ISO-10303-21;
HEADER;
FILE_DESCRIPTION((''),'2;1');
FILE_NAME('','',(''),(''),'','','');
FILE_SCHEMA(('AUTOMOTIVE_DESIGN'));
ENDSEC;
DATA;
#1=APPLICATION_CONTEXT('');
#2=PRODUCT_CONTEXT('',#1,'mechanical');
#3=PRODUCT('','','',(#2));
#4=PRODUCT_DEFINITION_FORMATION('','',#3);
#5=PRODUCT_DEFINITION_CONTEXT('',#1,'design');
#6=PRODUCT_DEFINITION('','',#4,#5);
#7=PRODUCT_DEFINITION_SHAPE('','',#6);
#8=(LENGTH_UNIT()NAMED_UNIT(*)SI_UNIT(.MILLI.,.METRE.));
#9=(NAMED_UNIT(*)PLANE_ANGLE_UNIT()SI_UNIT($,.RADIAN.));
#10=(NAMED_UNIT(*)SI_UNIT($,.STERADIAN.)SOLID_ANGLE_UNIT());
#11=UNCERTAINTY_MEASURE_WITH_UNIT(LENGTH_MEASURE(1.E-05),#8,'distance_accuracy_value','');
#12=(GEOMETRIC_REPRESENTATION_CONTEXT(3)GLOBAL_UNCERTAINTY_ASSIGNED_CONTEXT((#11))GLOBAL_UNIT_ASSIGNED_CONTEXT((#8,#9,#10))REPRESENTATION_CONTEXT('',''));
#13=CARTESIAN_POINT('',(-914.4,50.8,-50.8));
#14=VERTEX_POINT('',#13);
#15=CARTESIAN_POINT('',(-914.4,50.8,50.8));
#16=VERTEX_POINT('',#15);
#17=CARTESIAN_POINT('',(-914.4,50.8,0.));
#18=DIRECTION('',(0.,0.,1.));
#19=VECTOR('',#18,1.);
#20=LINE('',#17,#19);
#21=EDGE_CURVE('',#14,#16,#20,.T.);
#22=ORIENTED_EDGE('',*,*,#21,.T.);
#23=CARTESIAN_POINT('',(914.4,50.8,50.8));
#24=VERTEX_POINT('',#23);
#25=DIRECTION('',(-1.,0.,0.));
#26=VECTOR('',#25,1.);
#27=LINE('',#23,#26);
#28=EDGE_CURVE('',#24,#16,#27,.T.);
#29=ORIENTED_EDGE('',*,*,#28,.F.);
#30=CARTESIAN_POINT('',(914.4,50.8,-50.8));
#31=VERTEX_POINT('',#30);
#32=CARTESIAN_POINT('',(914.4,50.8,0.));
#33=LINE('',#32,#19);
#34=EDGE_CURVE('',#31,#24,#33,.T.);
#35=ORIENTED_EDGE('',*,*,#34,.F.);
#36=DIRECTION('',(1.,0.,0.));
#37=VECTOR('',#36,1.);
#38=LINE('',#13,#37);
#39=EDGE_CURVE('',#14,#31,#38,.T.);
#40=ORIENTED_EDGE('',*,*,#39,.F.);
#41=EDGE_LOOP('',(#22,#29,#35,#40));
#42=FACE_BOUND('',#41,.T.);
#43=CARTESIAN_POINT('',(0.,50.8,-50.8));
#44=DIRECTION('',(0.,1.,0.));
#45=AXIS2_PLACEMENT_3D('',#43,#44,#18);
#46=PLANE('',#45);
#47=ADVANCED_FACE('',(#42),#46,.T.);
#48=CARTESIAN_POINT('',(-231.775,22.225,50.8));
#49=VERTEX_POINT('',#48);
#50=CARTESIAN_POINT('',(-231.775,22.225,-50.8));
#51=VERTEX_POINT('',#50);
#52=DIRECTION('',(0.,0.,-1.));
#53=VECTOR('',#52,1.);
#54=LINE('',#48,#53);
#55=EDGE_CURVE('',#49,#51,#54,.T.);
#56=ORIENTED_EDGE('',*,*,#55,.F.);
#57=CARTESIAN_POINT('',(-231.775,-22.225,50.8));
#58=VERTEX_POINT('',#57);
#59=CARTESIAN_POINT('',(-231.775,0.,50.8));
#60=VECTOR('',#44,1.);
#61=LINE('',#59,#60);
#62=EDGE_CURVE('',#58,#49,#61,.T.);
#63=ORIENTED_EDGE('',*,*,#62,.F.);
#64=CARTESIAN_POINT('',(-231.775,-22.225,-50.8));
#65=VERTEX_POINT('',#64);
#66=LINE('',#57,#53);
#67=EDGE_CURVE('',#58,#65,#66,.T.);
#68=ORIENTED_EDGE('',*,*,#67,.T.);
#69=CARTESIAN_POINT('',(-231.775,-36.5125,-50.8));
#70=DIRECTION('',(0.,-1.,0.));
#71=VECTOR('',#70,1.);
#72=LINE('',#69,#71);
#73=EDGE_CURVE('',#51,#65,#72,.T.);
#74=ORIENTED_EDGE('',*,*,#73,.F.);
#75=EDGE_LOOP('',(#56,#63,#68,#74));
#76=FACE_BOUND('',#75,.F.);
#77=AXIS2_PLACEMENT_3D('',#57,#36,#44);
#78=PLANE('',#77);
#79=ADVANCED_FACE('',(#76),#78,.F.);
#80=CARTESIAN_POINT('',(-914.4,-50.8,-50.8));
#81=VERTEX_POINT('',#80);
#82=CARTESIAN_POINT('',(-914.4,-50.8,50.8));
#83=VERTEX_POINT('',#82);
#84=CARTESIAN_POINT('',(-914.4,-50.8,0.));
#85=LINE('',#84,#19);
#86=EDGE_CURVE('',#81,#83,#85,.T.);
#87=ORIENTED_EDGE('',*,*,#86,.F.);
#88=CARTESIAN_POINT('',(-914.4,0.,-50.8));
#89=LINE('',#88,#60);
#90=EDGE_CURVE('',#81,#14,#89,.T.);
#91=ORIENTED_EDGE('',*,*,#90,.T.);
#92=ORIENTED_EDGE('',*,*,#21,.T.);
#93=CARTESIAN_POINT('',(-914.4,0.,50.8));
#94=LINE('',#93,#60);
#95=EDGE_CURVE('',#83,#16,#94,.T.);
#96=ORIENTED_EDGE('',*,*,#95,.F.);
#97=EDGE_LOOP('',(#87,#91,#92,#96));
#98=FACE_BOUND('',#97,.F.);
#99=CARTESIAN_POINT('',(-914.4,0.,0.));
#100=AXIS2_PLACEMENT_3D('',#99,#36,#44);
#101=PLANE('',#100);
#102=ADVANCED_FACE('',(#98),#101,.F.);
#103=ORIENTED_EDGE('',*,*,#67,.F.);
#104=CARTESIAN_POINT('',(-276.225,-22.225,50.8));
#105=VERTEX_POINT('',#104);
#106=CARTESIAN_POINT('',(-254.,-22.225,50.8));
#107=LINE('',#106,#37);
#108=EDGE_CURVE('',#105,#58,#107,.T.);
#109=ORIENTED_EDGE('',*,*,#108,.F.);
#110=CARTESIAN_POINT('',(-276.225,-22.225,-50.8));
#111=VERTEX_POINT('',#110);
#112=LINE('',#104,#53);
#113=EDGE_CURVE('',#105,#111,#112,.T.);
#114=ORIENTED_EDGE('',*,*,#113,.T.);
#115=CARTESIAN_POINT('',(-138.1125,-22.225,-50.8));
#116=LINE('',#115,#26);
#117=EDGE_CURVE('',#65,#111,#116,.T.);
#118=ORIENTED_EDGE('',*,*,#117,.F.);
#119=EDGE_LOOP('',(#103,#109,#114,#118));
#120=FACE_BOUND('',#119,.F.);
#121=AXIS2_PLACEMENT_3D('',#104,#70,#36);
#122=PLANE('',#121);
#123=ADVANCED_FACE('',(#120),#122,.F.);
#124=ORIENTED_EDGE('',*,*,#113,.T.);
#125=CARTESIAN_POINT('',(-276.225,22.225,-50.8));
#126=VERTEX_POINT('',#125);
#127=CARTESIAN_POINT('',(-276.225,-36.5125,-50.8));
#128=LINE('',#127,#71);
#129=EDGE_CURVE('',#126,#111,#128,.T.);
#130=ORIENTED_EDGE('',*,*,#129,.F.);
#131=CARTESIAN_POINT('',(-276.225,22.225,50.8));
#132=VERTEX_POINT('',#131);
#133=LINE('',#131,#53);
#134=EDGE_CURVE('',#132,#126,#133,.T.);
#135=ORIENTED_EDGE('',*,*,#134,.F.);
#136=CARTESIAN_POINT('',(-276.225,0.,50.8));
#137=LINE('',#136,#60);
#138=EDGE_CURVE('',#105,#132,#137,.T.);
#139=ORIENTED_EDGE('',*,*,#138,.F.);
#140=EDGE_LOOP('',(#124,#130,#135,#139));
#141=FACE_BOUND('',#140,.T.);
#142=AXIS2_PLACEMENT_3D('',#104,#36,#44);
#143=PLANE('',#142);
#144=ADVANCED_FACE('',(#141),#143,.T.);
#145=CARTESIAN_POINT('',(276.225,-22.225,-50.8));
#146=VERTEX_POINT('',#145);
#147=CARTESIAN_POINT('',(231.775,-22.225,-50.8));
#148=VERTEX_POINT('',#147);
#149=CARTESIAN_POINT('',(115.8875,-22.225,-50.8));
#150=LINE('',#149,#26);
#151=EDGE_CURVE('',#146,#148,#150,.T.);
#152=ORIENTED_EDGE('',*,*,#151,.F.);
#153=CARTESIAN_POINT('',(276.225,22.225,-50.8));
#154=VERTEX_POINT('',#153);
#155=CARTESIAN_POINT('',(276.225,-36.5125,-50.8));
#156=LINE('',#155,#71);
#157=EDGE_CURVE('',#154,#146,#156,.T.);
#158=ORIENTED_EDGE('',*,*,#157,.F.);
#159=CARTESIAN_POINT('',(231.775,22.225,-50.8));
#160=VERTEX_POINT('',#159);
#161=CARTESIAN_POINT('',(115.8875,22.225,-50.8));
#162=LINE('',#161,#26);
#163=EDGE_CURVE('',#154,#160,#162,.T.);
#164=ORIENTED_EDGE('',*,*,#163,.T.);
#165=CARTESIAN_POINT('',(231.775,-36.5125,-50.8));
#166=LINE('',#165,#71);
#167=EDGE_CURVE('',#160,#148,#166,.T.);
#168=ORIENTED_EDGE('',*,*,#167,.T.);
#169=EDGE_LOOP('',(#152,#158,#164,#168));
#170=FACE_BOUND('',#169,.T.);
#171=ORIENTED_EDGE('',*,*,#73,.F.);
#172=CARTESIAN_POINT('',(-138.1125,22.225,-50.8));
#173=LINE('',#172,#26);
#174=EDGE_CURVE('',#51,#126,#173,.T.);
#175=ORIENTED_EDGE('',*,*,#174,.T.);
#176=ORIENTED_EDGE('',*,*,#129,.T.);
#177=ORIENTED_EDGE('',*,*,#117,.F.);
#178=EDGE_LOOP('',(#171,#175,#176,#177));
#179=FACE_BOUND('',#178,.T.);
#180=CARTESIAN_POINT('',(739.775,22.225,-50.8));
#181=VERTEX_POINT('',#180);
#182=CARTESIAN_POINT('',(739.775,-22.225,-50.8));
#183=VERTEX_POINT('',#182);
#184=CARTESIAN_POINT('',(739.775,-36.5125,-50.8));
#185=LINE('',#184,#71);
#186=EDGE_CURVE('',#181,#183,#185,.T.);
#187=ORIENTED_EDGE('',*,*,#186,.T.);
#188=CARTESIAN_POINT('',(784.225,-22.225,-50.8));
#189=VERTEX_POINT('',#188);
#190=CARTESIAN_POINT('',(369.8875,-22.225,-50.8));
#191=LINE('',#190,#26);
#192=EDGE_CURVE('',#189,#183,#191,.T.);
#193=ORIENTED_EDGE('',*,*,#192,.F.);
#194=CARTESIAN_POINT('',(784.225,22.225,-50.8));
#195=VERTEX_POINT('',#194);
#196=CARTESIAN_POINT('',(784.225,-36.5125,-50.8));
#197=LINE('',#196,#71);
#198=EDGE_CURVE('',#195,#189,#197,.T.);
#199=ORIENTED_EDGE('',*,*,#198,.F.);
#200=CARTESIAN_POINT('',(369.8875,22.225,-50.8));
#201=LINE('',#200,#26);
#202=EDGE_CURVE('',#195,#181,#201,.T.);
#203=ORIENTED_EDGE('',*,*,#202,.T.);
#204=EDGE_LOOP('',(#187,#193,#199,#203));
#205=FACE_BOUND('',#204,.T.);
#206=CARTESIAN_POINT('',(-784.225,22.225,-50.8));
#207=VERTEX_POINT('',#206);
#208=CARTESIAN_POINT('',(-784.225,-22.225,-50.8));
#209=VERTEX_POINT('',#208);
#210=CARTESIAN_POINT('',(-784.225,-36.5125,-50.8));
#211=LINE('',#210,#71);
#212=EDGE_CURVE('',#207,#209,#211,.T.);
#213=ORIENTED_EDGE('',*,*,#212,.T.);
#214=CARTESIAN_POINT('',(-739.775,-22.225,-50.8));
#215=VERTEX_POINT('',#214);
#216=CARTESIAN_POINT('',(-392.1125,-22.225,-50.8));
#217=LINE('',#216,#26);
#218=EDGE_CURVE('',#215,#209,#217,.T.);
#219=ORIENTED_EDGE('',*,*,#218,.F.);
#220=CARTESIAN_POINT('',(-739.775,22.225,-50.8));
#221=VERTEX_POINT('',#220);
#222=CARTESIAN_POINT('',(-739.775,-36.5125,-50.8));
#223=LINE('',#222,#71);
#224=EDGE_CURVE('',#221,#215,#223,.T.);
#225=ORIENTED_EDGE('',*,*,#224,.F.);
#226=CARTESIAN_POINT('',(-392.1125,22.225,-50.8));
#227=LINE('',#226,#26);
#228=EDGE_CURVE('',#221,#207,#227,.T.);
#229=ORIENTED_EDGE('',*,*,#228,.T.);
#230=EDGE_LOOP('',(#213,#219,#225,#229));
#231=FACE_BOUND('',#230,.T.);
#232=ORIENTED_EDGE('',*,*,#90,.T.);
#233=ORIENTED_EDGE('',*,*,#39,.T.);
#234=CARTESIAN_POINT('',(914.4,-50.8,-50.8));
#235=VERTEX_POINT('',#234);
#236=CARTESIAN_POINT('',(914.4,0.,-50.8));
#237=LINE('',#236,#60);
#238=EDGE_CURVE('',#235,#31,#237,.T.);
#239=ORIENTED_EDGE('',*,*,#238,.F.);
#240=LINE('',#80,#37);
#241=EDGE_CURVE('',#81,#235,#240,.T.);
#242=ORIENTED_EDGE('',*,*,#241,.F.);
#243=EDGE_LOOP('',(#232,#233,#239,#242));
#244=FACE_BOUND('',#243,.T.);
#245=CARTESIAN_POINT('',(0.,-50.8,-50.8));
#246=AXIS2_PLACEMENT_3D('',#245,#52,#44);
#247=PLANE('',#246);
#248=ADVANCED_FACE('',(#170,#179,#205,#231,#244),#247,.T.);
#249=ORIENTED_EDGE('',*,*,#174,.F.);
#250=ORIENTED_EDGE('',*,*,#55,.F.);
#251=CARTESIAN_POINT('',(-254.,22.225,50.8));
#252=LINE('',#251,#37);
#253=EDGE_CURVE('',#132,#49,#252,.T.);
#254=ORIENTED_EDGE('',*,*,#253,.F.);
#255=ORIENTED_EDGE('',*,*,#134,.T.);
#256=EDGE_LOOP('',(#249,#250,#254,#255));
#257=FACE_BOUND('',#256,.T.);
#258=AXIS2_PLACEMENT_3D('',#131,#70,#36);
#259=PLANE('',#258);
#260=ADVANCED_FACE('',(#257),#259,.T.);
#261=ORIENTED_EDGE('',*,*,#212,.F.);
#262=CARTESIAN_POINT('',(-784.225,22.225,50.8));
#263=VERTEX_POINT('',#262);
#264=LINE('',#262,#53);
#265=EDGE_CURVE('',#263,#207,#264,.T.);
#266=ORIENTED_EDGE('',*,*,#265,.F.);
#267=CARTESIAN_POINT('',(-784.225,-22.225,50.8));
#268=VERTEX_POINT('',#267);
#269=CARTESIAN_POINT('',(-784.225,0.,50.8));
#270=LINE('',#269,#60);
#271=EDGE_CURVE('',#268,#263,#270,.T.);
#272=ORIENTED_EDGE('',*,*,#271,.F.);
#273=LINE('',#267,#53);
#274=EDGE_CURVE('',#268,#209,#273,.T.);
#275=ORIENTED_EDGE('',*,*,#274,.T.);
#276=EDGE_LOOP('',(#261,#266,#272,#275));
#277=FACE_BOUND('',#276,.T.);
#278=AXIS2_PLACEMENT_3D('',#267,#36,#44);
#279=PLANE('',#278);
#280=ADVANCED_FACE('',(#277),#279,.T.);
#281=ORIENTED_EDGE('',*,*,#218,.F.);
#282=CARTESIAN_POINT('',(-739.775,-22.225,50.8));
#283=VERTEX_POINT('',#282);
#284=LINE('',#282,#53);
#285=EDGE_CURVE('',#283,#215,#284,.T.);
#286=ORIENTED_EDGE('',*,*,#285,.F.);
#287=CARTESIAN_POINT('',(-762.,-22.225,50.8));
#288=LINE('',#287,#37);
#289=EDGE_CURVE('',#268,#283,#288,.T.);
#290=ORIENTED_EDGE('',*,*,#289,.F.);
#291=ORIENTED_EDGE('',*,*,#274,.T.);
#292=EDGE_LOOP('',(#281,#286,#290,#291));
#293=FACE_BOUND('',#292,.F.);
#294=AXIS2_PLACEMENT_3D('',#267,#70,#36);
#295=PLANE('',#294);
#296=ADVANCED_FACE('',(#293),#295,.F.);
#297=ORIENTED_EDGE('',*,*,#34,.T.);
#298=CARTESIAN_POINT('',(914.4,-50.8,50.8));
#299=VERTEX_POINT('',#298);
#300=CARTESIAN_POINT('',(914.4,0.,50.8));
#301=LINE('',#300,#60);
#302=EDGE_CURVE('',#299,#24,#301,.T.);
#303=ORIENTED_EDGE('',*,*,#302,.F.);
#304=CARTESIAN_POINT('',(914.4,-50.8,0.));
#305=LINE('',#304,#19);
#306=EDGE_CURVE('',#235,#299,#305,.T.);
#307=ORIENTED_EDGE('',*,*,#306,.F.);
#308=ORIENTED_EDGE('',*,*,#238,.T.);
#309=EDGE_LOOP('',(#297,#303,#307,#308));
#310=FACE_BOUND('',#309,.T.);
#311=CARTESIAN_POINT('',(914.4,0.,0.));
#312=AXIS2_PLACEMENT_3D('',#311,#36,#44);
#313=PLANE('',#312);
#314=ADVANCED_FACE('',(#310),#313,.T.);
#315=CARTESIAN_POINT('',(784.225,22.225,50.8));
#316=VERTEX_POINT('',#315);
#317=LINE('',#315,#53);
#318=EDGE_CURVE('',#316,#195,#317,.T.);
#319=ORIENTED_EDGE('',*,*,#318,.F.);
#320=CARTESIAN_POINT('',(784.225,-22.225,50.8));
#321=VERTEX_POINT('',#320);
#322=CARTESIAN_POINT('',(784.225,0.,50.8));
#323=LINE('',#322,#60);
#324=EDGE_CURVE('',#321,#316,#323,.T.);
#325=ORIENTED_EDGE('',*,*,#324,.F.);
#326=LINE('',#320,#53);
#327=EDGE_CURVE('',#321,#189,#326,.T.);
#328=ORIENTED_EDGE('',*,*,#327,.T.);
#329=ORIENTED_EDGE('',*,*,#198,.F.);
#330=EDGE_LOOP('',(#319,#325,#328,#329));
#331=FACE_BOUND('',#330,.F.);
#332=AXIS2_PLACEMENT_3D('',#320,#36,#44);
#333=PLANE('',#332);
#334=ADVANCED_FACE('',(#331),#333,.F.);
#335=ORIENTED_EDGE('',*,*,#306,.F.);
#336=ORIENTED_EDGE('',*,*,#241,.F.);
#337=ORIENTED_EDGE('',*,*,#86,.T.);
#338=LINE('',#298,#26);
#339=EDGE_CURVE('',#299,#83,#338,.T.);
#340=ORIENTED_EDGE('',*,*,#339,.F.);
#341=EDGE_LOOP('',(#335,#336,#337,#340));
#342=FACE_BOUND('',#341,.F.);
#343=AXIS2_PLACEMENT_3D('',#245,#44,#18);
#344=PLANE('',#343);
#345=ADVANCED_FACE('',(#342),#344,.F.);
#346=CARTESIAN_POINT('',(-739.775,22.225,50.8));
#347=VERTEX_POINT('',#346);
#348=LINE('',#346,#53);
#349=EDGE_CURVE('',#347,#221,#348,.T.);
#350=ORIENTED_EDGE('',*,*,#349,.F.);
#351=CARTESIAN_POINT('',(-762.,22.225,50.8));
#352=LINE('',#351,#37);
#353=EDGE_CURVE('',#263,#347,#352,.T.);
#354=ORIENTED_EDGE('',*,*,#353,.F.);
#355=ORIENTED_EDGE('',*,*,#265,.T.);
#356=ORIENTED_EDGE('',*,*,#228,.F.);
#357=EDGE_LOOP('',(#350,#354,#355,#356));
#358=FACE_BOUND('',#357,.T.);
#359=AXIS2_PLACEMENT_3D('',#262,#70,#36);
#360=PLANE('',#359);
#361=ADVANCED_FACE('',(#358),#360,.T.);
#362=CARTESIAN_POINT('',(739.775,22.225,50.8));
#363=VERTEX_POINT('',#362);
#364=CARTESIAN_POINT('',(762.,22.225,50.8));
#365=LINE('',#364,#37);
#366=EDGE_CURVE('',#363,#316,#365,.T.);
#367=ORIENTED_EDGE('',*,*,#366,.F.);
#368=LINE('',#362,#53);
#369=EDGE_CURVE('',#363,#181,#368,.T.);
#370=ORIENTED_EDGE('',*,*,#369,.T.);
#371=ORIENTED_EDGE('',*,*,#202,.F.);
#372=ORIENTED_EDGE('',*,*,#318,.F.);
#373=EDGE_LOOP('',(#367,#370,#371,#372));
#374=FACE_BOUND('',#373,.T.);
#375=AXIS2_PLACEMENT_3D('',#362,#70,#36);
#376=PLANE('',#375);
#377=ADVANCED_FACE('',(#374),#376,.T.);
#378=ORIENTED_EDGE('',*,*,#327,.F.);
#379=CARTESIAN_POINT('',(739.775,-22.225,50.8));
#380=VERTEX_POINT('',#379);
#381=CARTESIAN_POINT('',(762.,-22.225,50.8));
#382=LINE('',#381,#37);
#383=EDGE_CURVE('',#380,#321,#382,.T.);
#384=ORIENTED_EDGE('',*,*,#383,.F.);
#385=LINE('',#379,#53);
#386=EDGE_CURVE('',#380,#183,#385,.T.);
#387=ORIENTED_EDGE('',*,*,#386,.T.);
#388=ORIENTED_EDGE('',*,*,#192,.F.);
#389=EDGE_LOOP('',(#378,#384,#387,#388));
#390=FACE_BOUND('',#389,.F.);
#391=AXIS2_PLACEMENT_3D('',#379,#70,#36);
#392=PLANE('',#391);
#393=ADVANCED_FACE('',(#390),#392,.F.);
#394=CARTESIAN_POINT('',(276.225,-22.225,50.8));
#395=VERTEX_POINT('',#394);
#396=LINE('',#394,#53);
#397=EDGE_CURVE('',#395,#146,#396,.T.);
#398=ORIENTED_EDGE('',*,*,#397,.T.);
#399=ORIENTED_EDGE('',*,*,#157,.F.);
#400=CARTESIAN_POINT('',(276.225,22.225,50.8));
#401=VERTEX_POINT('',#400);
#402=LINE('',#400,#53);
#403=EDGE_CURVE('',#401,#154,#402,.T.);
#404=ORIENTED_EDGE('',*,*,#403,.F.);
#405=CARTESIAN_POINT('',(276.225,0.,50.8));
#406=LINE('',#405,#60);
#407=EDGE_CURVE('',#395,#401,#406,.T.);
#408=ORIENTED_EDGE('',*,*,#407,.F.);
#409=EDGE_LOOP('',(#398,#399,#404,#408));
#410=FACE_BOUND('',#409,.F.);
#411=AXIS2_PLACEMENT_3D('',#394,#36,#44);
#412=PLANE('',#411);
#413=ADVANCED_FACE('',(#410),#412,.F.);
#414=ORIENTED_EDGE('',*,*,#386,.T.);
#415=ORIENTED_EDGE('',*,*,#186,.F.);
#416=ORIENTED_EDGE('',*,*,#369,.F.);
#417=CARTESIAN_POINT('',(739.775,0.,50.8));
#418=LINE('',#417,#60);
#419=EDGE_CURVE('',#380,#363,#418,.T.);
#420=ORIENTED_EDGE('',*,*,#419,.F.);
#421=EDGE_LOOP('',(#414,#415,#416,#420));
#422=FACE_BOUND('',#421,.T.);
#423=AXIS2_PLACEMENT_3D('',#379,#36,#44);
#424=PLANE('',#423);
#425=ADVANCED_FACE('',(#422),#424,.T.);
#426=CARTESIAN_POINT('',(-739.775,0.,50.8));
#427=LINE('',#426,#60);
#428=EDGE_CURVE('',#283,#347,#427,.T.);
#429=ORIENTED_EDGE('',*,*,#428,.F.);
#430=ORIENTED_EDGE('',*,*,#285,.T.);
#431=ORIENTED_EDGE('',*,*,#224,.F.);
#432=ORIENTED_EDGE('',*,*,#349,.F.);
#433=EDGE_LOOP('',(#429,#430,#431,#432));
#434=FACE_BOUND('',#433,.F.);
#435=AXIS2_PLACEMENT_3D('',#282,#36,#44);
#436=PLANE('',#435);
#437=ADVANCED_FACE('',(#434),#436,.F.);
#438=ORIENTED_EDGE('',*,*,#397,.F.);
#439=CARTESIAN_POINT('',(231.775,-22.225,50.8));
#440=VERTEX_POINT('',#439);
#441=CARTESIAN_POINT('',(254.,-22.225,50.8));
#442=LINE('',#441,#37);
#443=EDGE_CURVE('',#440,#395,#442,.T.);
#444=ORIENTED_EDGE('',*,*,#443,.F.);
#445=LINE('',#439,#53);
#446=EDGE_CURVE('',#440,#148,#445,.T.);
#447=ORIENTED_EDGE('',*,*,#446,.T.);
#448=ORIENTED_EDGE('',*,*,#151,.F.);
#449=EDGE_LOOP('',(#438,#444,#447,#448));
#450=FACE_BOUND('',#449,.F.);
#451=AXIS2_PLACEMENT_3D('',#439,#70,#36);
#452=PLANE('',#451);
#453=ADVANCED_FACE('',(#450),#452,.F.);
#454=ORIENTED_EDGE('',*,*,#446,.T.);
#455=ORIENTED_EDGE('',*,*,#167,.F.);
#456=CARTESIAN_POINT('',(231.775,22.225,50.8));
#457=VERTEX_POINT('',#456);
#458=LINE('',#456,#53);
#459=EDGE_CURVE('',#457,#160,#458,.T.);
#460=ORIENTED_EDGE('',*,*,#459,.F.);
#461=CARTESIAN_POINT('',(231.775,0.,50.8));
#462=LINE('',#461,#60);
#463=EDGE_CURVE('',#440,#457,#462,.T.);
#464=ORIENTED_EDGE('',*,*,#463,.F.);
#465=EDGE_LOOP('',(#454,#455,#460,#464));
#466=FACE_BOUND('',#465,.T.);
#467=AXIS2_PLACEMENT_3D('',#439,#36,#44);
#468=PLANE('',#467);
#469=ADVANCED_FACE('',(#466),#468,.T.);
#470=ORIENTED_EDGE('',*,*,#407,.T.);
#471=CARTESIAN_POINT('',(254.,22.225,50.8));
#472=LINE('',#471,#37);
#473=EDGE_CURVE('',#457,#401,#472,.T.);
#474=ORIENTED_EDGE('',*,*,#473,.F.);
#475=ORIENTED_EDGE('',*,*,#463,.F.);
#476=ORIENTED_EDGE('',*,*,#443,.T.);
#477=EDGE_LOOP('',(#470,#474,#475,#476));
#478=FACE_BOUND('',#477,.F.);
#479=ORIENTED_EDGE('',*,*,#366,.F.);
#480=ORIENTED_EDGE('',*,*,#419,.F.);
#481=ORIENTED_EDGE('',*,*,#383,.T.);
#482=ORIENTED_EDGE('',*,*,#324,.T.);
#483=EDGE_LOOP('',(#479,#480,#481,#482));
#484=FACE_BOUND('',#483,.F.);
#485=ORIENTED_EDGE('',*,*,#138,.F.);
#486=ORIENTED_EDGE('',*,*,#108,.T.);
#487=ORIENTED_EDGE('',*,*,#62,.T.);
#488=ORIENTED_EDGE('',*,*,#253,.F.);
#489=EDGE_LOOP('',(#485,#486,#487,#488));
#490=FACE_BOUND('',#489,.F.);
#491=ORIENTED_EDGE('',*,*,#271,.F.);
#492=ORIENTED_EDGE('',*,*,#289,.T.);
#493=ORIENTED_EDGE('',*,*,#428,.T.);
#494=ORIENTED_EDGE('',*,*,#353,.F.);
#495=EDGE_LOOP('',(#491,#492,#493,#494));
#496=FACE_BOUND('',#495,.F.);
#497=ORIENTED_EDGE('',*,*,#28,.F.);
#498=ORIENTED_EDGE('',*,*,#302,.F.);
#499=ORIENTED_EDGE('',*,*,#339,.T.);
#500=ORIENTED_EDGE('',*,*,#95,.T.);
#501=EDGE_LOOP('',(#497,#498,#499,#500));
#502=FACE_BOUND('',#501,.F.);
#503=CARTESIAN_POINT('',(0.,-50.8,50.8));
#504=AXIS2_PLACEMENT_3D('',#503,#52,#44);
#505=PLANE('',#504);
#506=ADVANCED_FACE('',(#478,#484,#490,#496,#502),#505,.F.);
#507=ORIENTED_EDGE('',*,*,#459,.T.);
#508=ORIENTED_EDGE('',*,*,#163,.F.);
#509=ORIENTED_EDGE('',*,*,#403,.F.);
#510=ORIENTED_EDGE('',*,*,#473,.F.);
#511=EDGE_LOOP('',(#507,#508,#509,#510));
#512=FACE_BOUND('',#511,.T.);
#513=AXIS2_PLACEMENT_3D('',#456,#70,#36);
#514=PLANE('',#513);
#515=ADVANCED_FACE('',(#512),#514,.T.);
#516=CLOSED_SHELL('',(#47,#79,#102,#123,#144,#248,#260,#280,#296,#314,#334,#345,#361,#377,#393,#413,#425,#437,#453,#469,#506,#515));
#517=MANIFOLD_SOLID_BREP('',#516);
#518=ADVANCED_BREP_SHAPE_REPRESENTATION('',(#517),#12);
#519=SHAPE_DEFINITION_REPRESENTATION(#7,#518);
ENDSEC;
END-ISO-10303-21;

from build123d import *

# Parameters (mm, degrees)
F0_W            = 101.6
F0_H            = 101.6
F1_DEPTH        = 914.4
F2_W            = 44.45
F2_H            = 44.45
F3_DEPTH        = 101.601
F4_W            = 44.45
F4_H            = 44.45
F5_DEPTH        = 101.601
F5_COPIES_COUNT = 3
F5_COPIES_PITCH = 508


# Not quite as in the source:
# - a pattern or mirror of a feature is missing from the dataset's text; its kind, count and spacing are read off the source's solid


with BuildPart() as f1:
    # F0 (on Right) → F1 (new body, symmetric)
    with BuildSketch(Plane.YZ):
        Rectangle(F0_W, F0_H)
    extrude(amount=F1_DEPTH, both=True)

    # F2 (on face) → F3 (cut, through all)
    with BuildSketch(Plane.XY.offset(50.8)):
        with Locations((-762, 0)):
            Rectangle(F2_W, F2_H)
    extrude(amount=-F3_DEPTH, mode=Mode.SUBTRACT)

    # F4 (on face) → F5 (cut, through all)
    with BuildSketch(Plane.XY.offset(50.8)):
        with Locations((-254, 0)):
            Rectangle(F4_W, F4_H)
    f5 = extrude(amount=-F5_DEPTH, mode=Mode.SUBTRACT)

    # F5_copies: F5 ×3
    with Locations(*[(i * F5_COPIES_PITCH, 0, 0) for i in range(1, F5_COPIES_COUNT)]):
        add(f5, mode=Mode.SUBTRACT)


solid = f1.part
